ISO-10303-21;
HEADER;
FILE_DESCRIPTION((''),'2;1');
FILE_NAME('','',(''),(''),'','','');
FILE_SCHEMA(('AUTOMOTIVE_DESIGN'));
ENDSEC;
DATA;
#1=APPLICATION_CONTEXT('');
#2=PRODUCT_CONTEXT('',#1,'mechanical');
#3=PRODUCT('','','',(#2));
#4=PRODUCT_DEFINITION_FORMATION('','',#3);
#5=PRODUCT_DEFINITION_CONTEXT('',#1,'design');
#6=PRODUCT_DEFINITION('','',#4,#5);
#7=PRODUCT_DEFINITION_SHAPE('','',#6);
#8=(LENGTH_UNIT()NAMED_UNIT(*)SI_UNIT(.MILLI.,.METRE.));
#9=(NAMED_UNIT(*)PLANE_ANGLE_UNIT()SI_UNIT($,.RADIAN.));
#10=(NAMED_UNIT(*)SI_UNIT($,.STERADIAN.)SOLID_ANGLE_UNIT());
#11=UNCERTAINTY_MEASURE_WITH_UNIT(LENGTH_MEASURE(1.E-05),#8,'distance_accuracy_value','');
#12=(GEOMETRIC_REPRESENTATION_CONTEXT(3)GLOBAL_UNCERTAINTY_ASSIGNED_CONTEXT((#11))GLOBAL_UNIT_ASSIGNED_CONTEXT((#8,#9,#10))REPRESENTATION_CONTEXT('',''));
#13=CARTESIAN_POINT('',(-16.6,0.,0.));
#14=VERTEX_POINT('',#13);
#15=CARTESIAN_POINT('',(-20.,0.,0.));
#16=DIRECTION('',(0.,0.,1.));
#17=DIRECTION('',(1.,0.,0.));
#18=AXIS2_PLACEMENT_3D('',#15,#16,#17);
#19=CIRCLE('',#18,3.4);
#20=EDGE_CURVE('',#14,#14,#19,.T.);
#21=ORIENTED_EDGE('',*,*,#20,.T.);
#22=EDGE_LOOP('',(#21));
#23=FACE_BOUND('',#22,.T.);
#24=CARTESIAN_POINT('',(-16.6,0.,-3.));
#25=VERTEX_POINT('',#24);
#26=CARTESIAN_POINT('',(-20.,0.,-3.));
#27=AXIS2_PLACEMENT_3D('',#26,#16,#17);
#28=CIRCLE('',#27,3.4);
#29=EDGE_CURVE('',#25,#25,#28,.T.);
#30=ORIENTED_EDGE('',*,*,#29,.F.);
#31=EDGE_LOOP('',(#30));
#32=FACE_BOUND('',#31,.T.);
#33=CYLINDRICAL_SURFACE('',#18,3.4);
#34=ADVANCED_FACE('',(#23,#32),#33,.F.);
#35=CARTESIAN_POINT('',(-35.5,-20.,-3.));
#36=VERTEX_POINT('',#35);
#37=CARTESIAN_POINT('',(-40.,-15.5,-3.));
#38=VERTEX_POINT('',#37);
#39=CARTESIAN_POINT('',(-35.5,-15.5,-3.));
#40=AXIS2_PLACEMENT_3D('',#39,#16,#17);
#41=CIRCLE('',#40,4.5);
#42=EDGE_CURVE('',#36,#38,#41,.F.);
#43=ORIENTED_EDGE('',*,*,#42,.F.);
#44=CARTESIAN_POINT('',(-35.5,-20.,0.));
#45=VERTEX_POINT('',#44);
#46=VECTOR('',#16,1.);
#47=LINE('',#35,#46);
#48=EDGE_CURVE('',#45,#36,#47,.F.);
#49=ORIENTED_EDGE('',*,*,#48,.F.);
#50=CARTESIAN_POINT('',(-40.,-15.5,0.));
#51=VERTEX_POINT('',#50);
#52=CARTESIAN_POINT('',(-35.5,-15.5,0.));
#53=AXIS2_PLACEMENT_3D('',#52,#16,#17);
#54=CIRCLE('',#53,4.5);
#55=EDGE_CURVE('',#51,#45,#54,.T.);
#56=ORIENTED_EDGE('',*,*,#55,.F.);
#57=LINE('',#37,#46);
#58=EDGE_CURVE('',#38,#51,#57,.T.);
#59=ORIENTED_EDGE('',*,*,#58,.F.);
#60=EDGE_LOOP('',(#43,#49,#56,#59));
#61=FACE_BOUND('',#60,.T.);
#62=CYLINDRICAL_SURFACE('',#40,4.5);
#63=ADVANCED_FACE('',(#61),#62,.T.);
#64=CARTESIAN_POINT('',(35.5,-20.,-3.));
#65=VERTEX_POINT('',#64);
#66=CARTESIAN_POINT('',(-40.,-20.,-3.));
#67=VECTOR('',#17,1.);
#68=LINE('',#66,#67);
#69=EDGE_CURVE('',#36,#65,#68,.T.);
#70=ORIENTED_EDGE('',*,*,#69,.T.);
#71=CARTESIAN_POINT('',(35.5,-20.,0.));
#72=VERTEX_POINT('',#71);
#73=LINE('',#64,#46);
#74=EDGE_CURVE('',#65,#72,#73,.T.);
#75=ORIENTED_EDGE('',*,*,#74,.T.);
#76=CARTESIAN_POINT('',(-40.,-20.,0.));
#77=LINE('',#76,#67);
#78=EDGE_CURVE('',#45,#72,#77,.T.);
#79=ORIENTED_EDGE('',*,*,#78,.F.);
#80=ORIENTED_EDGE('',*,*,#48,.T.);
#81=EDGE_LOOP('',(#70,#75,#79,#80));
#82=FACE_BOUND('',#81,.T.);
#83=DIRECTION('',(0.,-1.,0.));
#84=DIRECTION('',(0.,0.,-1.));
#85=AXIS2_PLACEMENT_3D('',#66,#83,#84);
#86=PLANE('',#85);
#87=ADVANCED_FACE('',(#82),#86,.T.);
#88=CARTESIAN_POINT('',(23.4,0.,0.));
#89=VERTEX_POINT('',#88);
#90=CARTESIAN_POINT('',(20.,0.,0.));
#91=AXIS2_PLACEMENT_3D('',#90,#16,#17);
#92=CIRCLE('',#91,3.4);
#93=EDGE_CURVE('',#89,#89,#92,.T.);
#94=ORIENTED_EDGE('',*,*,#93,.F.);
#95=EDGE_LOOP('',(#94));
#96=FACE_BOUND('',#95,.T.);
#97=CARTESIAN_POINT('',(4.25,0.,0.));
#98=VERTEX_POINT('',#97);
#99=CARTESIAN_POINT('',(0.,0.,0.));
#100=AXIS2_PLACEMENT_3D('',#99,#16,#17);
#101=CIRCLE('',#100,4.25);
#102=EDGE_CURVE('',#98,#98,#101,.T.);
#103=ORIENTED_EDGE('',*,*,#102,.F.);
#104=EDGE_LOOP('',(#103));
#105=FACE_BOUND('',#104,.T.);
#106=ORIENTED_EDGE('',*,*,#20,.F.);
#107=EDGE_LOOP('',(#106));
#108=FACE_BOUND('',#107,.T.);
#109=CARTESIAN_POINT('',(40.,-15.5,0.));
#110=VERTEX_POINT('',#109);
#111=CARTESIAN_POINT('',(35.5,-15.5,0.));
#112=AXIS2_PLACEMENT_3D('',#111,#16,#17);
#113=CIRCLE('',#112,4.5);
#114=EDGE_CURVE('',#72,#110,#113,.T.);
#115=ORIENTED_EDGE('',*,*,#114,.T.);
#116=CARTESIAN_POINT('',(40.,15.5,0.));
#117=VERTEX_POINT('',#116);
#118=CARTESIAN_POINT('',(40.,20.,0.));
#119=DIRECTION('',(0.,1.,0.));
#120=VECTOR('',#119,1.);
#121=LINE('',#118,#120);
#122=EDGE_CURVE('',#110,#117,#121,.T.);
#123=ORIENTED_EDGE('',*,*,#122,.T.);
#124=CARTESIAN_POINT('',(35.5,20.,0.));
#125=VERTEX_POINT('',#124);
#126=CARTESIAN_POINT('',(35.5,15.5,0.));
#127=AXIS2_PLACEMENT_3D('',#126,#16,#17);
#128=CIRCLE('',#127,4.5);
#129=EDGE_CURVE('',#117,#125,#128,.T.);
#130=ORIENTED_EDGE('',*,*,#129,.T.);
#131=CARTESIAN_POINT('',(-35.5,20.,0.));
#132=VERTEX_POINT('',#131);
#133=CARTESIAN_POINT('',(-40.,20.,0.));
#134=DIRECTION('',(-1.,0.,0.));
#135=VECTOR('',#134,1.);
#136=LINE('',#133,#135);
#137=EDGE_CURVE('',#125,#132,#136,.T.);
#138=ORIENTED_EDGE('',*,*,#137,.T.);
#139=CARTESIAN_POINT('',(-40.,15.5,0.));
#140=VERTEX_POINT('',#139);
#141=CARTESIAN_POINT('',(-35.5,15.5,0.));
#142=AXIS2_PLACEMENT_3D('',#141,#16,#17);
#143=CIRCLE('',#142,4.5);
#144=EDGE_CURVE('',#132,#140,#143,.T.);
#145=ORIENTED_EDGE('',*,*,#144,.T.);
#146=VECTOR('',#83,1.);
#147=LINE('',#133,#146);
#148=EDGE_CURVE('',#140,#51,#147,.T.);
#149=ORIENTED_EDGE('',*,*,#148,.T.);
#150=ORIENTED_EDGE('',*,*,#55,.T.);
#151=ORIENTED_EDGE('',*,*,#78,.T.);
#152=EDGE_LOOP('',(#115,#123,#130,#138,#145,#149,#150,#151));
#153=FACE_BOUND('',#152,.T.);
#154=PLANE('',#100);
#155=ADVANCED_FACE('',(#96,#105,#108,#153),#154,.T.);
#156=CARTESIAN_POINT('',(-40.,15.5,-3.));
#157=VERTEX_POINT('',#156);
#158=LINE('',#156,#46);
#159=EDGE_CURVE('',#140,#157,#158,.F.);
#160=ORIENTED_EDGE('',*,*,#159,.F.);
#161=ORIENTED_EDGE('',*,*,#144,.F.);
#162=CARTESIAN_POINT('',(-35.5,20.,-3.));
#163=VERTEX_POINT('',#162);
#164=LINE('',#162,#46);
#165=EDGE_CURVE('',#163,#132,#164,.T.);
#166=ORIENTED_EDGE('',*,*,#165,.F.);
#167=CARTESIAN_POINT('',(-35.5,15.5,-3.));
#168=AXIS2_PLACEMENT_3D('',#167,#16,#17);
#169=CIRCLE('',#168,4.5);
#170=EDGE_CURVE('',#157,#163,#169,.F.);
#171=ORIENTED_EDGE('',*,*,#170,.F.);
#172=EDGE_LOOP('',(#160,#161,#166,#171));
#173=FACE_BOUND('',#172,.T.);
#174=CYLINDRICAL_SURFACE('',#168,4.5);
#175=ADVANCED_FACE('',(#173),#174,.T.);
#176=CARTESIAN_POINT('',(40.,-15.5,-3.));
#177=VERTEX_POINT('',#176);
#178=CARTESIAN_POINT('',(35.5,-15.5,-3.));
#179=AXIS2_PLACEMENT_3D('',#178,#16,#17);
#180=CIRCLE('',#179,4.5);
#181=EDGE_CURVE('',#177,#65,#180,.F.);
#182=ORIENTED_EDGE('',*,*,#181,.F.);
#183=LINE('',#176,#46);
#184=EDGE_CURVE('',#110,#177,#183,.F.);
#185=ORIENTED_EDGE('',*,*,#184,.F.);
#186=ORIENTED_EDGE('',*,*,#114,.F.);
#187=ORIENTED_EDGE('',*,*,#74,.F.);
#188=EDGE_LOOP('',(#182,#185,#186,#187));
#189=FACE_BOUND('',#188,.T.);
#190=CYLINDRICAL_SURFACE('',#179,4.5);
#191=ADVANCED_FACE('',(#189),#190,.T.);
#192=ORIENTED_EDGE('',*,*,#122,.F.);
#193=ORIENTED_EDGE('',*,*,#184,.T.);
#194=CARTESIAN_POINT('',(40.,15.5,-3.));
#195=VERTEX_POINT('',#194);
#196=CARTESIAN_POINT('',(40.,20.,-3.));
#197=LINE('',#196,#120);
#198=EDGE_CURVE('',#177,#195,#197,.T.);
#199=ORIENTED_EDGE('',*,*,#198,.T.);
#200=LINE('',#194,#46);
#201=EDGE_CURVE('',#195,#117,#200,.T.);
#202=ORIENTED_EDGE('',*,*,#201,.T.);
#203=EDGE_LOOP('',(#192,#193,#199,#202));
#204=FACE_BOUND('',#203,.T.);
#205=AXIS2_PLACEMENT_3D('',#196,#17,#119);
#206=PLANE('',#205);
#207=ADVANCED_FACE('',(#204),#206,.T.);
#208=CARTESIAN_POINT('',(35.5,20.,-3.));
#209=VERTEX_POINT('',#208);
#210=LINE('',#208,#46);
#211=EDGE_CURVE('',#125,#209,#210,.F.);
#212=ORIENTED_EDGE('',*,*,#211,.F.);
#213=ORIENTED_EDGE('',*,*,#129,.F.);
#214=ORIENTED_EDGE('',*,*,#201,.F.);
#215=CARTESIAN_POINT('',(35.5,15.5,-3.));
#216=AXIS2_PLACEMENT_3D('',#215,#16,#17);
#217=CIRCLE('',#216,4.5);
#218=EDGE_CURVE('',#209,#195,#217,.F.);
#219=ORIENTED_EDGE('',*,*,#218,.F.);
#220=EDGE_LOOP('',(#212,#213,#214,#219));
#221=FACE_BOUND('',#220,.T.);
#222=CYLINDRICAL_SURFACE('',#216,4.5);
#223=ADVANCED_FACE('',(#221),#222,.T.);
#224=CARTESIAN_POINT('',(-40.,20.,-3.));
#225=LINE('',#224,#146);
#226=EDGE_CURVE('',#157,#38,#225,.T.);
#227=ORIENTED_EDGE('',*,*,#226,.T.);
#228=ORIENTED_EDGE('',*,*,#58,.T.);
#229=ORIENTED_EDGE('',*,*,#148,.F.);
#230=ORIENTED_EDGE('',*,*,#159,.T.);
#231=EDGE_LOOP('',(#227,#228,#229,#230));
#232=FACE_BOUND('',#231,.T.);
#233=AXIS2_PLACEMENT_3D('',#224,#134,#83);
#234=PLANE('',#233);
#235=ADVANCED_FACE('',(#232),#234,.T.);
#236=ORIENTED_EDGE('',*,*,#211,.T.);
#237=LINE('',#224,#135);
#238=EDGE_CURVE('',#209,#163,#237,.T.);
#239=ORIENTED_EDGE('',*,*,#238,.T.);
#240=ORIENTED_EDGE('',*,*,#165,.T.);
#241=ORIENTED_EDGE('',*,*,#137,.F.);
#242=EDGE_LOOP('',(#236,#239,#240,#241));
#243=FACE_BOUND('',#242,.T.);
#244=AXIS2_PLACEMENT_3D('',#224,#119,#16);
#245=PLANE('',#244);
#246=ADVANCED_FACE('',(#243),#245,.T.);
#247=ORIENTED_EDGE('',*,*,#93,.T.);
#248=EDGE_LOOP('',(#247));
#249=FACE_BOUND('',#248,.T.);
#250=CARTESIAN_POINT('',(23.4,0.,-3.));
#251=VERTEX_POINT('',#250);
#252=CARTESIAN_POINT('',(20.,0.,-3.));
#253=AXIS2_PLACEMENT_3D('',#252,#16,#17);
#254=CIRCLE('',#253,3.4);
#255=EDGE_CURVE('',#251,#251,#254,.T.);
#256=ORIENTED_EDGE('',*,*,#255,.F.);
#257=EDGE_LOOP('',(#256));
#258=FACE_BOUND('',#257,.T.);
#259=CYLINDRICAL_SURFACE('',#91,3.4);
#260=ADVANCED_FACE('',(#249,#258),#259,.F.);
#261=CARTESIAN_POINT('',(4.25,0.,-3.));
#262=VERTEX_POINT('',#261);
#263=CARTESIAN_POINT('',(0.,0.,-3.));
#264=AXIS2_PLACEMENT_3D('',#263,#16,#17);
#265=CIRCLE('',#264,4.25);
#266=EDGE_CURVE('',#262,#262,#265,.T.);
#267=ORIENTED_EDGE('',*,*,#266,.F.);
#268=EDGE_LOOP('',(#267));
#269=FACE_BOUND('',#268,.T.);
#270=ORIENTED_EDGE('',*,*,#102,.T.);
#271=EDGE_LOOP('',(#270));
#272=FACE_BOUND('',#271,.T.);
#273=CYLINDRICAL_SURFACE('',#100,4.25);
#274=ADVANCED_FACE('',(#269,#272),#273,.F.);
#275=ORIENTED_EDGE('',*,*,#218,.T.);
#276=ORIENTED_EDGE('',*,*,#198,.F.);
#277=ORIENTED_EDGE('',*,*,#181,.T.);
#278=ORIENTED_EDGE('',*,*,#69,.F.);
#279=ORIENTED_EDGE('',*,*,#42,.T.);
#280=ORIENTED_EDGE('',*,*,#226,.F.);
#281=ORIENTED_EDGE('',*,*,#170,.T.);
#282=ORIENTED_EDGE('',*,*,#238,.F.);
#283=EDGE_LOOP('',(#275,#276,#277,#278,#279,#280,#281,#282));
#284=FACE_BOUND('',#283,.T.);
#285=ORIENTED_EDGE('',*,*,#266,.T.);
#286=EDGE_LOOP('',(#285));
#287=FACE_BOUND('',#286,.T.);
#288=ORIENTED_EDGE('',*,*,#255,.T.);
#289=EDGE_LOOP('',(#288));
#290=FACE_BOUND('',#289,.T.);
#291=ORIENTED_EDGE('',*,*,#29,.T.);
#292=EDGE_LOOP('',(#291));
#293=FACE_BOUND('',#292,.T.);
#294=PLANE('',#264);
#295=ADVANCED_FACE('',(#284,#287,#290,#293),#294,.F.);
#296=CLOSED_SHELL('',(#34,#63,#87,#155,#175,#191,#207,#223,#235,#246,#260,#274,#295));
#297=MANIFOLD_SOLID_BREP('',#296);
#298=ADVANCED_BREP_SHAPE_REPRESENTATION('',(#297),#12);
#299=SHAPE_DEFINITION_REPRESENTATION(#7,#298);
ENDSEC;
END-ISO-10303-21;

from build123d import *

# Parameters (mm, degrees)
SKETCH_1_W             = 80
SKETCH_1_H             = 40
SM_BASE_FLANGE_1_DEPTH = 3
OTHER_START            = -3
OTHER_1_DEPTH          = 3
HOLE_WIZARD_M8_1_D     = 6.8
HOLE_WIZARD_M10_1_D    = 8.5


# Read off the part's stored shape, not the designer's step: 断开-边角1
# Sheet-metal steps are written as plain solids
with BuildPart() as part:
    # Sketch 1 → 基体-法兰1 (new body)
    with BuildSketch(Plane.XY):
        Rectangle(SKETCH_1_W, SKETCH_1_H)
    extrude(amount=-SM_BASE_FLANGE_1_DEPTH)

    # Other 1 outline → Other 1 (cut)
    with BuildSketch(Plane.XY.offset(OTHER_START)):
        with BuildLine():
            ThreePointArc((40, -15.5), (38.681980515, -18.681980515), (35.5, -20))
            Line((35.5, -20), (40, -20))
            Line((40, -20), (40, -15.5))
        make_face()
        with BuildLine():
            Line((-40, -20), (-35.5, -20))
            ThreePointArc((-35.5, -20), (-38.681980515, -18.681980515), (-40, -15.5))
            Line((-40, -15.5), (-40, -20))
        make_face()
        with BuildLine():
            ThreePointArc((35.5, 20), (38.681980515, 18.681980515), (40, 15.5))
            Line((40, 15.5), (40, 20))
            Line((40, 20), (35.5, 20))
        make_face()
        with BuildLine():
            Line((-40, 20), (-40, 15.5))
            ThreePointArc((-40, 15.5), (-38.681980515, 18.681980515), (-35.5, 20))
            Line((-35.5, 20), (-40, 20))
        make_face()
    extrude(amount=OTHER_1_DEPTH, mode=Mode.SUBTRACT)

    # M8 螺纹孔1 (through all)
    with Locations(Plane.XY):
        with Locations((-20, 0), (20, 0)):
            Hole(HOLE_WIZARD_M8_1_D / 2)

    # M10 螺纹孔1 (through all)
    with Locations(Plane.XY):
        with Locations((0, 0)):
            Hole(HOLE_WIZARD_M10_1_D / 2)


solid = part.part
